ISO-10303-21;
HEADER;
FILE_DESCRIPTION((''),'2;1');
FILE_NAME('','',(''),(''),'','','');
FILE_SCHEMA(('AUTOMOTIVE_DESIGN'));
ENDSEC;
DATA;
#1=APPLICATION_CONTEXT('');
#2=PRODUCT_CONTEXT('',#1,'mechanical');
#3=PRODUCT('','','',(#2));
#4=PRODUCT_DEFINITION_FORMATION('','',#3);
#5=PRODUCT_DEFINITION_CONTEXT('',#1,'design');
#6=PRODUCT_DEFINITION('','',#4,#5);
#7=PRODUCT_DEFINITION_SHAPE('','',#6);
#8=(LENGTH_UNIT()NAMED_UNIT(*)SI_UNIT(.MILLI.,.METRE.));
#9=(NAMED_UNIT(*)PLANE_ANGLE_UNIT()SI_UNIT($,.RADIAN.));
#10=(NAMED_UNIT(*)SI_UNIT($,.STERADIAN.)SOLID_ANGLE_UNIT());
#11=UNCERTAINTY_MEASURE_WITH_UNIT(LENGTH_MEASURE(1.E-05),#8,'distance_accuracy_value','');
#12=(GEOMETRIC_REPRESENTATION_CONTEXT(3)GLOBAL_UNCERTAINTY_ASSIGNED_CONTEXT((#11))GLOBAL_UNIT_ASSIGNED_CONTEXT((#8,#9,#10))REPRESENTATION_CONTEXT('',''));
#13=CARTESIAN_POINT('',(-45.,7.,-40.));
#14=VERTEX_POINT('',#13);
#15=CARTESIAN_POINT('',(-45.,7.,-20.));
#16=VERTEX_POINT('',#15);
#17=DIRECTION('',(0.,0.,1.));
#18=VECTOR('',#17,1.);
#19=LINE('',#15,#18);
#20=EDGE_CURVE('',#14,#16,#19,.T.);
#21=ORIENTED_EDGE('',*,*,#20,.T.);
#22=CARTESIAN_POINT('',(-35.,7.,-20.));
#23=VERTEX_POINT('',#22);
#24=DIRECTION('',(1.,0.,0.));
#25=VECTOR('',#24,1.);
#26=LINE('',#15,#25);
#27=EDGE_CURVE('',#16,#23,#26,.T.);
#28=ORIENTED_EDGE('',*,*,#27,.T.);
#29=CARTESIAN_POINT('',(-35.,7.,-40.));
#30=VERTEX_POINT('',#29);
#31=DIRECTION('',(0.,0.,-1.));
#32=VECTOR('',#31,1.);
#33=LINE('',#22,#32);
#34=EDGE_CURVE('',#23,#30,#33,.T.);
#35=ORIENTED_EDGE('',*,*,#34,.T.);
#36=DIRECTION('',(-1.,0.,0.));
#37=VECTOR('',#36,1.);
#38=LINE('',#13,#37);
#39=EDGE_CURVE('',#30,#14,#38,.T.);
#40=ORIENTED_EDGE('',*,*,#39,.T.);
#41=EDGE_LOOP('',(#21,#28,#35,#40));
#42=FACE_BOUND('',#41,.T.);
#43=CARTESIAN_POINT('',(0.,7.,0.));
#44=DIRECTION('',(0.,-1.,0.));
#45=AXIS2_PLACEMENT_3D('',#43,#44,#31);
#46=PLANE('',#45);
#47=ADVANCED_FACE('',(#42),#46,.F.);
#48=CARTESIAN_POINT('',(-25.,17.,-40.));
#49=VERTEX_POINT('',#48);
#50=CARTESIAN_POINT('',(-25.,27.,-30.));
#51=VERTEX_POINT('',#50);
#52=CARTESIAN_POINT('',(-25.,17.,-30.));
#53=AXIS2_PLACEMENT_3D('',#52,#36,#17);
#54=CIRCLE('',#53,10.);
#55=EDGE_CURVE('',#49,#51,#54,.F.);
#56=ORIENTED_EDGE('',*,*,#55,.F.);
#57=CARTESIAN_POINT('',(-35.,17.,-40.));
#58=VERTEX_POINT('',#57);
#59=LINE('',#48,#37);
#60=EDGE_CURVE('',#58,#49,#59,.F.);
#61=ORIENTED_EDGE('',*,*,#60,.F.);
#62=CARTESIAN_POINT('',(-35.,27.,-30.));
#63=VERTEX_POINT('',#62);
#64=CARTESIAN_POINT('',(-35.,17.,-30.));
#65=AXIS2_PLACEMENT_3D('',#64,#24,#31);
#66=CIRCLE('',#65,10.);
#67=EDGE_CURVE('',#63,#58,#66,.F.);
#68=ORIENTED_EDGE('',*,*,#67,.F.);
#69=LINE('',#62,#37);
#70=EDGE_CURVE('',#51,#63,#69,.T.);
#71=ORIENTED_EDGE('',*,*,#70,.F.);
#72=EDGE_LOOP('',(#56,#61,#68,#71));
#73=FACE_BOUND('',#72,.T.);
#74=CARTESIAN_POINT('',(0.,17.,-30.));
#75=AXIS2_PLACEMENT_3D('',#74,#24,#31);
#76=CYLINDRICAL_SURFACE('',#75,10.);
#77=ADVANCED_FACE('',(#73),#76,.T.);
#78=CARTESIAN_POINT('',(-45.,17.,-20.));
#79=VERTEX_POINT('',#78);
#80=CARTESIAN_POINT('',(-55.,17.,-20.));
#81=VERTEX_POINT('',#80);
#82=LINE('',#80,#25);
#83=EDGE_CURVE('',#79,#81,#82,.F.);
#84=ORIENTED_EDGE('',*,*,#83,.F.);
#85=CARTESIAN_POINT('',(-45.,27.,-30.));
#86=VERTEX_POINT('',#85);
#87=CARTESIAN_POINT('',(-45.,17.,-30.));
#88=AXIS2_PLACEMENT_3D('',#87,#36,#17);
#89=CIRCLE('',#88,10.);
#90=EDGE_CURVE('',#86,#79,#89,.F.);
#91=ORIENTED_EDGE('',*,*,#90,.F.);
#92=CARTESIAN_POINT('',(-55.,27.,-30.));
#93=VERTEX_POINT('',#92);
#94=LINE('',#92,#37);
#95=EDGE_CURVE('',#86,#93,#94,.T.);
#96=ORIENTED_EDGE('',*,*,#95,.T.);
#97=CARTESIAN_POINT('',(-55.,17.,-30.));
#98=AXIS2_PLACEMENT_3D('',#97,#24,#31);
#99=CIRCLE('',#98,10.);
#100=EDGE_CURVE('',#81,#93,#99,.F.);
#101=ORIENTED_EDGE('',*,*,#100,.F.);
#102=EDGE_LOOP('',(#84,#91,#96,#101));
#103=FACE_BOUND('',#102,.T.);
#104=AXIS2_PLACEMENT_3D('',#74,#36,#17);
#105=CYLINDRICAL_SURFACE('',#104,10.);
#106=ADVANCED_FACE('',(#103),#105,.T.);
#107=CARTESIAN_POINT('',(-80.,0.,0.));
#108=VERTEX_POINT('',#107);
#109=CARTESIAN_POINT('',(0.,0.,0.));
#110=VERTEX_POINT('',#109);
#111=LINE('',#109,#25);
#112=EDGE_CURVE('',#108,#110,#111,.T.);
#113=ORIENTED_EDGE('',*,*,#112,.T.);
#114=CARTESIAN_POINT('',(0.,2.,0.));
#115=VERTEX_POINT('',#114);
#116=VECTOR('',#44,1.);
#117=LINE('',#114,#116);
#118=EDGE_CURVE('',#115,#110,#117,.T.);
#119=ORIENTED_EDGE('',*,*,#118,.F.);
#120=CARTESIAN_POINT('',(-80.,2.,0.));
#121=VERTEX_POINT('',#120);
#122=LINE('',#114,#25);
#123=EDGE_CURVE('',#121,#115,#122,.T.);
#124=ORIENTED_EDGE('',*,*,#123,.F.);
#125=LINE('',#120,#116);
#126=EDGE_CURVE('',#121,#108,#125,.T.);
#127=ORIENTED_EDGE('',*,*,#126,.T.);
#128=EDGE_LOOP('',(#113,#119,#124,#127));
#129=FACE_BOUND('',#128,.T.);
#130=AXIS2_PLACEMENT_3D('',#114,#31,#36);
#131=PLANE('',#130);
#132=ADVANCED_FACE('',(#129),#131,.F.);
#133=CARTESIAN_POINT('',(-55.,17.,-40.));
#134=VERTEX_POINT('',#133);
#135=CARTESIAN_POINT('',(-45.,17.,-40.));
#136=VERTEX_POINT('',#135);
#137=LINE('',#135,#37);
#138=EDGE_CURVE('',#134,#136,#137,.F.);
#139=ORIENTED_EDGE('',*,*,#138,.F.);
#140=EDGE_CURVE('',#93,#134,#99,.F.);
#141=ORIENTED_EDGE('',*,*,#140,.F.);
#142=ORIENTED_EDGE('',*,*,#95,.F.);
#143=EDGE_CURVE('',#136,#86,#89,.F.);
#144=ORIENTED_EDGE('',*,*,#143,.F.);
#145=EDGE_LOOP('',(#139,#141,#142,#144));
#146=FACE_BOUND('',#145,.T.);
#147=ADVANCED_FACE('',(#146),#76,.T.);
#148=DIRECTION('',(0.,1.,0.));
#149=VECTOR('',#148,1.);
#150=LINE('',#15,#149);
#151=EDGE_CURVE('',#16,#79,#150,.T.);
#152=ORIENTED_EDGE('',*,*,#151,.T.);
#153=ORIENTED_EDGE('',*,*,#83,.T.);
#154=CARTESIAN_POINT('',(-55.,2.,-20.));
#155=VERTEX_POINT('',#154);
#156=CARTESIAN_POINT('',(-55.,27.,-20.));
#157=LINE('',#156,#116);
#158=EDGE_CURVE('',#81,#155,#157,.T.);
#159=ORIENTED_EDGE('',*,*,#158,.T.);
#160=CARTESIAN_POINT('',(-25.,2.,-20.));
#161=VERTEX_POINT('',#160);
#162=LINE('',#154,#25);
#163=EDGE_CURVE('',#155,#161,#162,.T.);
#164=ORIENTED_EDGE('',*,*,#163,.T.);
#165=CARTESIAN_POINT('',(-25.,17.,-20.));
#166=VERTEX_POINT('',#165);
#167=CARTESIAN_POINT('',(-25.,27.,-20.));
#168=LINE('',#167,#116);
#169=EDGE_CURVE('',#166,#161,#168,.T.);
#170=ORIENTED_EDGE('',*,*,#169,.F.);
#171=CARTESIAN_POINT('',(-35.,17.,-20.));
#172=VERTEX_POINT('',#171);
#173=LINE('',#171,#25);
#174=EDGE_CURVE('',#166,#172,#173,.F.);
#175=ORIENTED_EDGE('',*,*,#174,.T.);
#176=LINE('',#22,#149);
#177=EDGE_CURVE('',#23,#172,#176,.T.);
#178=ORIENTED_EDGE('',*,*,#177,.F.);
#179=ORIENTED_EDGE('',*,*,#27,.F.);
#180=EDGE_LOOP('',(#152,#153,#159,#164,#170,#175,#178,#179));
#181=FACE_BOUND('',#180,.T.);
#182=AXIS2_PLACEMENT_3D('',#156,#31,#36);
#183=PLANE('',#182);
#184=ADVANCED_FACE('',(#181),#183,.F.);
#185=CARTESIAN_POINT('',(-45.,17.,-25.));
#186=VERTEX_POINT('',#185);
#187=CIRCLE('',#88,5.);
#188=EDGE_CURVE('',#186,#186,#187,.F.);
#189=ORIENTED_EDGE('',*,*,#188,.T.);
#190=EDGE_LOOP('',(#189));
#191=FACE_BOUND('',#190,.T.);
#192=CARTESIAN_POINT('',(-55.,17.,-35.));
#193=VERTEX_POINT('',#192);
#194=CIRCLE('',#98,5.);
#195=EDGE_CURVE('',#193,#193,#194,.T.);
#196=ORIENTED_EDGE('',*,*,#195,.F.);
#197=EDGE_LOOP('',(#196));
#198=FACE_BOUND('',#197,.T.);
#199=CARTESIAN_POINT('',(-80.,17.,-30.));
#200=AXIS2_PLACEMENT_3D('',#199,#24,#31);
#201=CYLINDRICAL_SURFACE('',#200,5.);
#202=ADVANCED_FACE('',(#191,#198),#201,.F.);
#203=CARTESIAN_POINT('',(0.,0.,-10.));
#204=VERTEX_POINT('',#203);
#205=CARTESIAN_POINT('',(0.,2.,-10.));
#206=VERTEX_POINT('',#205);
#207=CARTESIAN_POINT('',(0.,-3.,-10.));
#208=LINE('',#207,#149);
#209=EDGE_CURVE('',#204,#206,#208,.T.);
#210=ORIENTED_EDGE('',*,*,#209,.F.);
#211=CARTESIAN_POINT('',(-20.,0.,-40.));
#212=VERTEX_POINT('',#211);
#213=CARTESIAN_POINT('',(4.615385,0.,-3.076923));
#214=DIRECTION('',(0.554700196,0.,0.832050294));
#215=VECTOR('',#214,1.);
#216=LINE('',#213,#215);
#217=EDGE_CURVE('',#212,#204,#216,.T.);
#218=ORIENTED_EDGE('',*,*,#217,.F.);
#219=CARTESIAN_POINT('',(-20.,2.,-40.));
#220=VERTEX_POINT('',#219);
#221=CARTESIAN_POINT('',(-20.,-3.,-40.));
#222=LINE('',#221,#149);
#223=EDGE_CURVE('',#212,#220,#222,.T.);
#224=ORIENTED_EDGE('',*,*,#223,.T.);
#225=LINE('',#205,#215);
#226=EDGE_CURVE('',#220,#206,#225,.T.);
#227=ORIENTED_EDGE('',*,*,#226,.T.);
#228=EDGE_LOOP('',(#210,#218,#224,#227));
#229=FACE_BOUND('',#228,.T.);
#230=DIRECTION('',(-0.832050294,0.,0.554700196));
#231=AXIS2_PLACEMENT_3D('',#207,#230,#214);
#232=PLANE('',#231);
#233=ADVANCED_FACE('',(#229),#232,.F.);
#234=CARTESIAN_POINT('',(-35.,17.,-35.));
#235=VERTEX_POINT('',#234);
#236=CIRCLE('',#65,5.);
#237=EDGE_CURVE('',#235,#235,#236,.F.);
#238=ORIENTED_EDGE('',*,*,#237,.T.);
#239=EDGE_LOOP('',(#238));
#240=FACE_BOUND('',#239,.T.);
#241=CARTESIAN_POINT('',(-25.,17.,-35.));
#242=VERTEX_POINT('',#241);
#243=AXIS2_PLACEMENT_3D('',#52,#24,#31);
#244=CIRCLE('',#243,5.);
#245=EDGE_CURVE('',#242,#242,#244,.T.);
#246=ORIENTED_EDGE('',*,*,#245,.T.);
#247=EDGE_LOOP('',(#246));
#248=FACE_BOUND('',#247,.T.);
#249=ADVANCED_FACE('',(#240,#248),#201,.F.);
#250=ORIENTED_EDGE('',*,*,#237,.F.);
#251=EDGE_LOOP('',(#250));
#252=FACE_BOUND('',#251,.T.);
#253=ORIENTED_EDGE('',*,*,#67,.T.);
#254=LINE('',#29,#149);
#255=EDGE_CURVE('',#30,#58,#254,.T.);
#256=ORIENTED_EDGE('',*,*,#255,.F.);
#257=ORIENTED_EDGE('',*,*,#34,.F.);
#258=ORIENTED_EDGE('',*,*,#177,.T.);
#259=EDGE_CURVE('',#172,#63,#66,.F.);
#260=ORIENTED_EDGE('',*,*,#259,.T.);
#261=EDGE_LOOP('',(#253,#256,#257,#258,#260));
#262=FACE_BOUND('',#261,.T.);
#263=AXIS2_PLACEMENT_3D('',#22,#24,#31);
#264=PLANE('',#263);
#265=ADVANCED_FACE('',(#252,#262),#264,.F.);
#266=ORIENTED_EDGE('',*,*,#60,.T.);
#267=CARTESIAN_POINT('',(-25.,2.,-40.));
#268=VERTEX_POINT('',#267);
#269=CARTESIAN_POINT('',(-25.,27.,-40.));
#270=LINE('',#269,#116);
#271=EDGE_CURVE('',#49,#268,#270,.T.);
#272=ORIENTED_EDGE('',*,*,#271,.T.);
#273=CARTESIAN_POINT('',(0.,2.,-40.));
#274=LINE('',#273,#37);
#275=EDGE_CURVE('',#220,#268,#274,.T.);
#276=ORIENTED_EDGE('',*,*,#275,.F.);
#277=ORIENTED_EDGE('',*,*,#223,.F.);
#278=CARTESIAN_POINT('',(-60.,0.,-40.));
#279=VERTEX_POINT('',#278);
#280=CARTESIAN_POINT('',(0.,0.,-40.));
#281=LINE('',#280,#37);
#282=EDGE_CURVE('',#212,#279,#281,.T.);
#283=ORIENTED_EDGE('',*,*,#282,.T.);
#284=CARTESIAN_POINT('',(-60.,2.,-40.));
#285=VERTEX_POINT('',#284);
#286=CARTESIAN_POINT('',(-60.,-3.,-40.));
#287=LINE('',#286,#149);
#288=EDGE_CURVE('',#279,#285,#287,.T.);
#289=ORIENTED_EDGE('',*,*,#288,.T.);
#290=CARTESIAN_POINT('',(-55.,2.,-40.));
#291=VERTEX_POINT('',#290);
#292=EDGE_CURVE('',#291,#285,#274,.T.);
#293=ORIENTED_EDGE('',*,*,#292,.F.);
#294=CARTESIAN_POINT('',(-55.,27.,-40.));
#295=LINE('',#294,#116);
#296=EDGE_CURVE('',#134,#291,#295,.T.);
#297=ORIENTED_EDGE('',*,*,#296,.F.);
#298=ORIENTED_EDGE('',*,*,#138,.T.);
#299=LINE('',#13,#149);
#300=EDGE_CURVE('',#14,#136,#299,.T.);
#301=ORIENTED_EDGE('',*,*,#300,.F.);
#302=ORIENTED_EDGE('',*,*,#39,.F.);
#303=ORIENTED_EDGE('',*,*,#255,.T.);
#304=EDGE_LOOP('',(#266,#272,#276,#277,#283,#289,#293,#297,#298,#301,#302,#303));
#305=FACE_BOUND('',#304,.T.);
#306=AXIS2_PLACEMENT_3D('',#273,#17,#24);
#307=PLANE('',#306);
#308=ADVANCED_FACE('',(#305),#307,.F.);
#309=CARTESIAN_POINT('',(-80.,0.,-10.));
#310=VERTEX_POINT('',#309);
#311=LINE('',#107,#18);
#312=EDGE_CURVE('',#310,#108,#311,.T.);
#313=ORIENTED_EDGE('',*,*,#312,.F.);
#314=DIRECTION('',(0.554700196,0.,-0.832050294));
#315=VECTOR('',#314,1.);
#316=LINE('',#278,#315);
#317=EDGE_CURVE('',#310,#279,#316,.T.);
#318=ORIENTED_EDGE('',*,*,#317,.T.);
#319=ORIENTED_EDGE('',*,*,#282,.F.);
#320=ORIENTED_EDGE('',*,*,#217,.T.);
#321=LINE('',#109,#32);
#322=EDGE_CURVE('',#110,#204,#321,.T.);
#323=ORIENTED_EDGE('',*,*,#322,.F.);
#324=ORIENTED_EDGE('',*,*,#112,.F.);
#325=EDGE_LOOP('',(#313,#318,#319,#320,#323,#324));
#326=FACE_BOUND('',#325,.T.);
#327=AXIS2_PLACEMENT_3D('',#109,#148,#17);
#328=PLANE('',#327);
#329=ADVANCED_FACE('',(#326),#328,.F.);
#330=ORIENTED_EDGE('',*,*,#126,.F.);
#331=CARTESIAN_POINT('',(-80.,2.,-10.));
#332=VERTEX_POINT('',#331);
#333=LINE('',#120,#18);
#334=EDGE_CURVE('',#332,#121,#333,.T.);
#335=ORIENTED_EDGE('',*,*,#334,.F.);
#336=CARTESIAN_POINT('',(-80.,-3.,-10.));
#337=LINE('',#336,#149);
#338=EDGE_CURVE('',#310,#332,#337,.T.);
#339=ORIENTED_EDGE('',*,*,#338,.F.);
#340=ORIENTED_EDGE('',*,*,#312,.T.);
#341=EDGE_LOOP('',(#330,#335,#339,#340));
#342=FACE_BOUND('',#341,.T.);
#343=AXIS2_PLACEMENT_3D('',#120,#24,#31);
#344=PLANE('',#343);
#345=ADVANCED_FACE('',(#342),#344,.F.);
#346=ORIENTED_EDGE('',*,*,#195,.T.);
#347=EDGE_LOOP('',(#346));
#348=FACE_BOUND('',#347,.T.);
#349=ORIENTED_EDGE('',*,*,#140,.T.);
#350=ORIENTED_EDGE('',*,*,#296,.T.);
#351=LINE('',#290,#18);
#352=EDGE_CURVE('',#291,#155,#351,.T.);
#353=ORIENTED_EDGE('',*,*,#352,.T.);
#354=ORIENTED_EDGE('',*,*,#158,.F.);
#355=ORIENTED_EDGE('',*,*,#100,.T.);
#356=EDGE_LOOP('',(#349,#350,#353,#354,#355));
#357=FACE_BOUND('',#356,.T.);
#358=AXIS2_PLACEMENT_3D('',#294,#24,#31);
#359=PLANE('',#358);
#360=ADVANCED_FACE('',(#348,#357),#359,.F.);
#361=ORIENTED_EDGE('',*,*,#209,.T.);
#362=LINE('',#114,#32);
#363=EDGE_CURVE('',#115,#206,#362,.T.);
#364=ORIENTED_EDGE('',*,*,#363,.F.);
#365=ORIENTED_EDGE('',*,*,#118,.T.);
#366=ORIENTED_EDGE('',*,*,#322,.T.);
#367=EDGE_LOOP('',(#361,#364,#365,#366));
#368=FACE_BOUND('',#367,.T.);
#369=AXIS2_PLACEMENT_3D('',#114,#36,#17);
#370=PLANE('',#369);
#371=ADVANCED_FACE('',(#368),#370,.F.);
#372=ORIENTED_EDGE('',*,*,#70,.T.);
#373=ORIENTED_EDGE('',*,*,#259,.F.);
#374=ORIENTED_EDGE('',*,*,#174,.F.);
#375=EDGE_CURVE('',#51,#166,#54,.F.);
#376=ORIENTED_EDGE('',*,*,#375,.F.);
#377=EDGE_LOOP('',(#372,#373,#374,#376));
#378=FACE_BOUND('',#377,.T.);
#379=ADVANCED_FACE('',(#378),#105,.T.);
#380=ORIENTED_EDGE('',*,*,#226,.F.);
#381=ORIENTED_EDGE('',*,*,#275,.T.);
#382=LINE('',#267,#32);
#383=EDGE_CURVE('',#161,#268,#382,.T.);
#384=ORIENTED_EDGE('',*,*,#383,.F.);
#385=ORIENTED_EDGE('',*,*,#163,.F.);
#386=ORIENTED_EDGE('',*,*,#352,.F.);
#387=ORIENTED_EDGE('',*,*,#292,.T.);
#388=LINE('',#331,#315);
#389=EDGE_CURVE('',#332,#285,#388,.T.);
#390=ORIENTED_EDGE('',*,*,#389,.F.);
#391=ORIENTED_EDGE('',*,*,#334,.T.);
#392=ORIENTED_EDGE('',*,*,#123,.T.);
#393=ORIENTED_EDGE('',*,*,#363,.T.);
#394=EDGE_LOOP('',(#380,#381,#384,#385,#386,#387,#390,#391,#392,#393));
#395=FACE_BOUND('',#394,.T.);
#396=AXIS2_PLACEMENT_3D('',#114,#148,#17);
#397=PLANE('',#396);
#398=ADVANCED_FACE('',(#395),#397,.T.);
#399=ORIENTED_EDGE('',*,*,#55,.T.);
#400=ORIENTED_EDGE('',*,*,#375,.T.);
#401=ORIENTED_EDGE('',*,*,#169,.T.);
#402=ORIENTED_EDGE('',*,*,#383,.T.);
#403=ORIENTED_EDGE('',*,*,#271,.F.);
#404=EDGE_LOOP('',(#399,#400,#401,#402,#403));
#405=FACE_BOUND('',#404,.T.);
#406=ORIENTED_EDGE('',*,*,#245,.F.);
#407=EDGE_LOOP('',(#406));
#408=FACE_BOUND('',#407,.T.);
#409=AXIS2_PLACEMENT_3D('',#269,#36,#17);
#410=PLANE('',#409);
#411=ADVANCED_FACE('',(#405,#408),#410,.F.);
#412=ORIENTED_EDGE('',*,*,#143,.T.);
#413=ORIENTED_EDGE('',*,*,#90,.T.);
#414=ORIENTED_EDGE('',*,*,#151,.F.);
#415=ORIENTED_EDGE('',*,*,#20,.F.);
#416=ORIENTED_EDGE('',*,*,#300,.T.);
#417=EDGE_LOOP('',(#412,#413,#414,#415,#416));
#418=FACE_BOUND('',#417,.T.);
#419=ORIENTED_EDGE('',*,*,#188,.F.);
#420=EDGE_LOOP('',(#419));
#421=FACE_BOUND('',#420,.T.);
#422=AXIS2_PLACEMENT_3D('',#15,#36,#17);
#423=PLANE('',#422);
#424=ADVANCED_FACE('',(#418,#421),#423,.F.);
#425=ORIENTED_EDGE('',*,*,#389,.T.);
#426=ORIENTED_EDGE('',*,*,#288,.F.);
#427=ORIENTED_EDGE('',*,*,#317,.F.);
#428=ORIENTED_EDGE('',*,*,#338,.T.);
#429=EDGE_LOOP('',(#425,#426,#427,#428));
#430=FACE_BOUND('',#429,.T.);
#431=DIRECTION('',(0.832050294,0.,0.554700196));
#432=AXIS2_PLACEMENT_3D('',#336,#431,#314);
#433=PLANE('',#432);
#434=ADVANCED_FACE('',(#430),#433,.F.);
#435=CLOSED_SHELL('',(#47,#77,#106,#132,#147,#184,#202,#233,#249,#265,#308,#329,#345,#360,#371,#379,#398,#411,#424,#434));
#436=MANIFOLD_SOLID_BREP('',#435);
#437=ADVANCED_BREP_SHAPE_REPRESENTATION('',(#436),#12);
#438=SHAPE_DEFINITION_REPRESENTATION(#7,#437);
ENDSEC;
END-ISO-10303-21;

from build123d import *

# Parameters (mm, degrees)
SKETCH1_W           = 80
SKETCH1_H           = 40
BOSS_EXTRUDE1_DEPTH = 2
CUT_EXTRUDE1_DEPTH  = 5
SKETCH3_W           = 30
SKETCH3_H           = 20
BOSS_EXTRUDE2_DEPTH = 25
SKETCH4_R           = 5
CUT_EXTRUDE2_DEPTH  = 74.17103252
SKETCH5_W           = 10
SKETCH5_H           = 20
CUT_EXTRUDE3_DEPTH  = 20
FILLET1_R           = 10


with BuildPart() as part:
    # Sketch1 → Boss-Extrude1 (new body)
    with BuildSketch(Plane(origin=(0, 0, 0), x_dir=(1, 0, 0), z_dir=(0, 1, 0))):
        with Locations((-40, 20)):
            Rectangle(SKETCH1_W, SKETCH1_H)
    extrude(amount=BOSS_EXTRUDE1_DEPTH)

    # Sketch2 → Cut-Extrude1 (cut)
    with BuildSketch(Plane(origin=(0, 2, 0), x_dir=(1, 0, 0), z_dir=(0, 1, 0))):
        Polygon((-80, 10), (-60, 40), (-80, 40), align=None)
        Polygon((0, 10), (-20, 40), (0, 40), align=None)
    extrude(amount=-CUT_EXTRUDE1_DEPTH, mode=Mode.SUBTRACT)

    # Sketch3 → Boss-Extrude2 (add)
    with BuildSketch(Plane(origin=(0, 2, 0), x_dir=(1, 0, 0), z_dir=(0, 1, 0))):
        with Locations((-40, 30)):
            Rectangle(SKETCH3_W, SKETCH3_H)
    extrude(amount=BOSS_EXTRUDE2_DEPTH)

    # Sketch4 → Cut-Extrude2 (cut, through all)
    with BuildSketch(Plane(origin=(-25, 0, 0), x_dir=(0, 0, -1), z_dir=(1, 0, 0))):
        with Locations((30, 17)):
            Circle(SKETCH4_R)
    extrude(amount=-CUT_EXTRUDE2_DEPTH, mode=Mode.SUBTRACT)

    # Sketch5 → Cut-Extrude3 (cut)
    with BuildSketch(Plane(origin=(0, 27, 0), x_dir=(1, 0, 0), z_dir=(0, 1, 0))):
        with Locations((-40, 30)):
            Rectangle(SKETCH5_W, SKETCH5_H)
    extrude(amount=-CUT_EXTRUDE3_DEPTH, mode=Mode.SUBTRACT)

    # Fillet1
    fillet1_edges = [part.edges().sort_by_distance(p)[0] for p in [
        (-30, 27, -20),
        (-50, 27, -20),
        (-50, 27, -40),
        (-30, 27, -40),
    ]]
    fillet(fillet1_edges, radius=FILLET1_R - 0.0001)  # a hair under: the kernel refuses the full size


solid = part.part
